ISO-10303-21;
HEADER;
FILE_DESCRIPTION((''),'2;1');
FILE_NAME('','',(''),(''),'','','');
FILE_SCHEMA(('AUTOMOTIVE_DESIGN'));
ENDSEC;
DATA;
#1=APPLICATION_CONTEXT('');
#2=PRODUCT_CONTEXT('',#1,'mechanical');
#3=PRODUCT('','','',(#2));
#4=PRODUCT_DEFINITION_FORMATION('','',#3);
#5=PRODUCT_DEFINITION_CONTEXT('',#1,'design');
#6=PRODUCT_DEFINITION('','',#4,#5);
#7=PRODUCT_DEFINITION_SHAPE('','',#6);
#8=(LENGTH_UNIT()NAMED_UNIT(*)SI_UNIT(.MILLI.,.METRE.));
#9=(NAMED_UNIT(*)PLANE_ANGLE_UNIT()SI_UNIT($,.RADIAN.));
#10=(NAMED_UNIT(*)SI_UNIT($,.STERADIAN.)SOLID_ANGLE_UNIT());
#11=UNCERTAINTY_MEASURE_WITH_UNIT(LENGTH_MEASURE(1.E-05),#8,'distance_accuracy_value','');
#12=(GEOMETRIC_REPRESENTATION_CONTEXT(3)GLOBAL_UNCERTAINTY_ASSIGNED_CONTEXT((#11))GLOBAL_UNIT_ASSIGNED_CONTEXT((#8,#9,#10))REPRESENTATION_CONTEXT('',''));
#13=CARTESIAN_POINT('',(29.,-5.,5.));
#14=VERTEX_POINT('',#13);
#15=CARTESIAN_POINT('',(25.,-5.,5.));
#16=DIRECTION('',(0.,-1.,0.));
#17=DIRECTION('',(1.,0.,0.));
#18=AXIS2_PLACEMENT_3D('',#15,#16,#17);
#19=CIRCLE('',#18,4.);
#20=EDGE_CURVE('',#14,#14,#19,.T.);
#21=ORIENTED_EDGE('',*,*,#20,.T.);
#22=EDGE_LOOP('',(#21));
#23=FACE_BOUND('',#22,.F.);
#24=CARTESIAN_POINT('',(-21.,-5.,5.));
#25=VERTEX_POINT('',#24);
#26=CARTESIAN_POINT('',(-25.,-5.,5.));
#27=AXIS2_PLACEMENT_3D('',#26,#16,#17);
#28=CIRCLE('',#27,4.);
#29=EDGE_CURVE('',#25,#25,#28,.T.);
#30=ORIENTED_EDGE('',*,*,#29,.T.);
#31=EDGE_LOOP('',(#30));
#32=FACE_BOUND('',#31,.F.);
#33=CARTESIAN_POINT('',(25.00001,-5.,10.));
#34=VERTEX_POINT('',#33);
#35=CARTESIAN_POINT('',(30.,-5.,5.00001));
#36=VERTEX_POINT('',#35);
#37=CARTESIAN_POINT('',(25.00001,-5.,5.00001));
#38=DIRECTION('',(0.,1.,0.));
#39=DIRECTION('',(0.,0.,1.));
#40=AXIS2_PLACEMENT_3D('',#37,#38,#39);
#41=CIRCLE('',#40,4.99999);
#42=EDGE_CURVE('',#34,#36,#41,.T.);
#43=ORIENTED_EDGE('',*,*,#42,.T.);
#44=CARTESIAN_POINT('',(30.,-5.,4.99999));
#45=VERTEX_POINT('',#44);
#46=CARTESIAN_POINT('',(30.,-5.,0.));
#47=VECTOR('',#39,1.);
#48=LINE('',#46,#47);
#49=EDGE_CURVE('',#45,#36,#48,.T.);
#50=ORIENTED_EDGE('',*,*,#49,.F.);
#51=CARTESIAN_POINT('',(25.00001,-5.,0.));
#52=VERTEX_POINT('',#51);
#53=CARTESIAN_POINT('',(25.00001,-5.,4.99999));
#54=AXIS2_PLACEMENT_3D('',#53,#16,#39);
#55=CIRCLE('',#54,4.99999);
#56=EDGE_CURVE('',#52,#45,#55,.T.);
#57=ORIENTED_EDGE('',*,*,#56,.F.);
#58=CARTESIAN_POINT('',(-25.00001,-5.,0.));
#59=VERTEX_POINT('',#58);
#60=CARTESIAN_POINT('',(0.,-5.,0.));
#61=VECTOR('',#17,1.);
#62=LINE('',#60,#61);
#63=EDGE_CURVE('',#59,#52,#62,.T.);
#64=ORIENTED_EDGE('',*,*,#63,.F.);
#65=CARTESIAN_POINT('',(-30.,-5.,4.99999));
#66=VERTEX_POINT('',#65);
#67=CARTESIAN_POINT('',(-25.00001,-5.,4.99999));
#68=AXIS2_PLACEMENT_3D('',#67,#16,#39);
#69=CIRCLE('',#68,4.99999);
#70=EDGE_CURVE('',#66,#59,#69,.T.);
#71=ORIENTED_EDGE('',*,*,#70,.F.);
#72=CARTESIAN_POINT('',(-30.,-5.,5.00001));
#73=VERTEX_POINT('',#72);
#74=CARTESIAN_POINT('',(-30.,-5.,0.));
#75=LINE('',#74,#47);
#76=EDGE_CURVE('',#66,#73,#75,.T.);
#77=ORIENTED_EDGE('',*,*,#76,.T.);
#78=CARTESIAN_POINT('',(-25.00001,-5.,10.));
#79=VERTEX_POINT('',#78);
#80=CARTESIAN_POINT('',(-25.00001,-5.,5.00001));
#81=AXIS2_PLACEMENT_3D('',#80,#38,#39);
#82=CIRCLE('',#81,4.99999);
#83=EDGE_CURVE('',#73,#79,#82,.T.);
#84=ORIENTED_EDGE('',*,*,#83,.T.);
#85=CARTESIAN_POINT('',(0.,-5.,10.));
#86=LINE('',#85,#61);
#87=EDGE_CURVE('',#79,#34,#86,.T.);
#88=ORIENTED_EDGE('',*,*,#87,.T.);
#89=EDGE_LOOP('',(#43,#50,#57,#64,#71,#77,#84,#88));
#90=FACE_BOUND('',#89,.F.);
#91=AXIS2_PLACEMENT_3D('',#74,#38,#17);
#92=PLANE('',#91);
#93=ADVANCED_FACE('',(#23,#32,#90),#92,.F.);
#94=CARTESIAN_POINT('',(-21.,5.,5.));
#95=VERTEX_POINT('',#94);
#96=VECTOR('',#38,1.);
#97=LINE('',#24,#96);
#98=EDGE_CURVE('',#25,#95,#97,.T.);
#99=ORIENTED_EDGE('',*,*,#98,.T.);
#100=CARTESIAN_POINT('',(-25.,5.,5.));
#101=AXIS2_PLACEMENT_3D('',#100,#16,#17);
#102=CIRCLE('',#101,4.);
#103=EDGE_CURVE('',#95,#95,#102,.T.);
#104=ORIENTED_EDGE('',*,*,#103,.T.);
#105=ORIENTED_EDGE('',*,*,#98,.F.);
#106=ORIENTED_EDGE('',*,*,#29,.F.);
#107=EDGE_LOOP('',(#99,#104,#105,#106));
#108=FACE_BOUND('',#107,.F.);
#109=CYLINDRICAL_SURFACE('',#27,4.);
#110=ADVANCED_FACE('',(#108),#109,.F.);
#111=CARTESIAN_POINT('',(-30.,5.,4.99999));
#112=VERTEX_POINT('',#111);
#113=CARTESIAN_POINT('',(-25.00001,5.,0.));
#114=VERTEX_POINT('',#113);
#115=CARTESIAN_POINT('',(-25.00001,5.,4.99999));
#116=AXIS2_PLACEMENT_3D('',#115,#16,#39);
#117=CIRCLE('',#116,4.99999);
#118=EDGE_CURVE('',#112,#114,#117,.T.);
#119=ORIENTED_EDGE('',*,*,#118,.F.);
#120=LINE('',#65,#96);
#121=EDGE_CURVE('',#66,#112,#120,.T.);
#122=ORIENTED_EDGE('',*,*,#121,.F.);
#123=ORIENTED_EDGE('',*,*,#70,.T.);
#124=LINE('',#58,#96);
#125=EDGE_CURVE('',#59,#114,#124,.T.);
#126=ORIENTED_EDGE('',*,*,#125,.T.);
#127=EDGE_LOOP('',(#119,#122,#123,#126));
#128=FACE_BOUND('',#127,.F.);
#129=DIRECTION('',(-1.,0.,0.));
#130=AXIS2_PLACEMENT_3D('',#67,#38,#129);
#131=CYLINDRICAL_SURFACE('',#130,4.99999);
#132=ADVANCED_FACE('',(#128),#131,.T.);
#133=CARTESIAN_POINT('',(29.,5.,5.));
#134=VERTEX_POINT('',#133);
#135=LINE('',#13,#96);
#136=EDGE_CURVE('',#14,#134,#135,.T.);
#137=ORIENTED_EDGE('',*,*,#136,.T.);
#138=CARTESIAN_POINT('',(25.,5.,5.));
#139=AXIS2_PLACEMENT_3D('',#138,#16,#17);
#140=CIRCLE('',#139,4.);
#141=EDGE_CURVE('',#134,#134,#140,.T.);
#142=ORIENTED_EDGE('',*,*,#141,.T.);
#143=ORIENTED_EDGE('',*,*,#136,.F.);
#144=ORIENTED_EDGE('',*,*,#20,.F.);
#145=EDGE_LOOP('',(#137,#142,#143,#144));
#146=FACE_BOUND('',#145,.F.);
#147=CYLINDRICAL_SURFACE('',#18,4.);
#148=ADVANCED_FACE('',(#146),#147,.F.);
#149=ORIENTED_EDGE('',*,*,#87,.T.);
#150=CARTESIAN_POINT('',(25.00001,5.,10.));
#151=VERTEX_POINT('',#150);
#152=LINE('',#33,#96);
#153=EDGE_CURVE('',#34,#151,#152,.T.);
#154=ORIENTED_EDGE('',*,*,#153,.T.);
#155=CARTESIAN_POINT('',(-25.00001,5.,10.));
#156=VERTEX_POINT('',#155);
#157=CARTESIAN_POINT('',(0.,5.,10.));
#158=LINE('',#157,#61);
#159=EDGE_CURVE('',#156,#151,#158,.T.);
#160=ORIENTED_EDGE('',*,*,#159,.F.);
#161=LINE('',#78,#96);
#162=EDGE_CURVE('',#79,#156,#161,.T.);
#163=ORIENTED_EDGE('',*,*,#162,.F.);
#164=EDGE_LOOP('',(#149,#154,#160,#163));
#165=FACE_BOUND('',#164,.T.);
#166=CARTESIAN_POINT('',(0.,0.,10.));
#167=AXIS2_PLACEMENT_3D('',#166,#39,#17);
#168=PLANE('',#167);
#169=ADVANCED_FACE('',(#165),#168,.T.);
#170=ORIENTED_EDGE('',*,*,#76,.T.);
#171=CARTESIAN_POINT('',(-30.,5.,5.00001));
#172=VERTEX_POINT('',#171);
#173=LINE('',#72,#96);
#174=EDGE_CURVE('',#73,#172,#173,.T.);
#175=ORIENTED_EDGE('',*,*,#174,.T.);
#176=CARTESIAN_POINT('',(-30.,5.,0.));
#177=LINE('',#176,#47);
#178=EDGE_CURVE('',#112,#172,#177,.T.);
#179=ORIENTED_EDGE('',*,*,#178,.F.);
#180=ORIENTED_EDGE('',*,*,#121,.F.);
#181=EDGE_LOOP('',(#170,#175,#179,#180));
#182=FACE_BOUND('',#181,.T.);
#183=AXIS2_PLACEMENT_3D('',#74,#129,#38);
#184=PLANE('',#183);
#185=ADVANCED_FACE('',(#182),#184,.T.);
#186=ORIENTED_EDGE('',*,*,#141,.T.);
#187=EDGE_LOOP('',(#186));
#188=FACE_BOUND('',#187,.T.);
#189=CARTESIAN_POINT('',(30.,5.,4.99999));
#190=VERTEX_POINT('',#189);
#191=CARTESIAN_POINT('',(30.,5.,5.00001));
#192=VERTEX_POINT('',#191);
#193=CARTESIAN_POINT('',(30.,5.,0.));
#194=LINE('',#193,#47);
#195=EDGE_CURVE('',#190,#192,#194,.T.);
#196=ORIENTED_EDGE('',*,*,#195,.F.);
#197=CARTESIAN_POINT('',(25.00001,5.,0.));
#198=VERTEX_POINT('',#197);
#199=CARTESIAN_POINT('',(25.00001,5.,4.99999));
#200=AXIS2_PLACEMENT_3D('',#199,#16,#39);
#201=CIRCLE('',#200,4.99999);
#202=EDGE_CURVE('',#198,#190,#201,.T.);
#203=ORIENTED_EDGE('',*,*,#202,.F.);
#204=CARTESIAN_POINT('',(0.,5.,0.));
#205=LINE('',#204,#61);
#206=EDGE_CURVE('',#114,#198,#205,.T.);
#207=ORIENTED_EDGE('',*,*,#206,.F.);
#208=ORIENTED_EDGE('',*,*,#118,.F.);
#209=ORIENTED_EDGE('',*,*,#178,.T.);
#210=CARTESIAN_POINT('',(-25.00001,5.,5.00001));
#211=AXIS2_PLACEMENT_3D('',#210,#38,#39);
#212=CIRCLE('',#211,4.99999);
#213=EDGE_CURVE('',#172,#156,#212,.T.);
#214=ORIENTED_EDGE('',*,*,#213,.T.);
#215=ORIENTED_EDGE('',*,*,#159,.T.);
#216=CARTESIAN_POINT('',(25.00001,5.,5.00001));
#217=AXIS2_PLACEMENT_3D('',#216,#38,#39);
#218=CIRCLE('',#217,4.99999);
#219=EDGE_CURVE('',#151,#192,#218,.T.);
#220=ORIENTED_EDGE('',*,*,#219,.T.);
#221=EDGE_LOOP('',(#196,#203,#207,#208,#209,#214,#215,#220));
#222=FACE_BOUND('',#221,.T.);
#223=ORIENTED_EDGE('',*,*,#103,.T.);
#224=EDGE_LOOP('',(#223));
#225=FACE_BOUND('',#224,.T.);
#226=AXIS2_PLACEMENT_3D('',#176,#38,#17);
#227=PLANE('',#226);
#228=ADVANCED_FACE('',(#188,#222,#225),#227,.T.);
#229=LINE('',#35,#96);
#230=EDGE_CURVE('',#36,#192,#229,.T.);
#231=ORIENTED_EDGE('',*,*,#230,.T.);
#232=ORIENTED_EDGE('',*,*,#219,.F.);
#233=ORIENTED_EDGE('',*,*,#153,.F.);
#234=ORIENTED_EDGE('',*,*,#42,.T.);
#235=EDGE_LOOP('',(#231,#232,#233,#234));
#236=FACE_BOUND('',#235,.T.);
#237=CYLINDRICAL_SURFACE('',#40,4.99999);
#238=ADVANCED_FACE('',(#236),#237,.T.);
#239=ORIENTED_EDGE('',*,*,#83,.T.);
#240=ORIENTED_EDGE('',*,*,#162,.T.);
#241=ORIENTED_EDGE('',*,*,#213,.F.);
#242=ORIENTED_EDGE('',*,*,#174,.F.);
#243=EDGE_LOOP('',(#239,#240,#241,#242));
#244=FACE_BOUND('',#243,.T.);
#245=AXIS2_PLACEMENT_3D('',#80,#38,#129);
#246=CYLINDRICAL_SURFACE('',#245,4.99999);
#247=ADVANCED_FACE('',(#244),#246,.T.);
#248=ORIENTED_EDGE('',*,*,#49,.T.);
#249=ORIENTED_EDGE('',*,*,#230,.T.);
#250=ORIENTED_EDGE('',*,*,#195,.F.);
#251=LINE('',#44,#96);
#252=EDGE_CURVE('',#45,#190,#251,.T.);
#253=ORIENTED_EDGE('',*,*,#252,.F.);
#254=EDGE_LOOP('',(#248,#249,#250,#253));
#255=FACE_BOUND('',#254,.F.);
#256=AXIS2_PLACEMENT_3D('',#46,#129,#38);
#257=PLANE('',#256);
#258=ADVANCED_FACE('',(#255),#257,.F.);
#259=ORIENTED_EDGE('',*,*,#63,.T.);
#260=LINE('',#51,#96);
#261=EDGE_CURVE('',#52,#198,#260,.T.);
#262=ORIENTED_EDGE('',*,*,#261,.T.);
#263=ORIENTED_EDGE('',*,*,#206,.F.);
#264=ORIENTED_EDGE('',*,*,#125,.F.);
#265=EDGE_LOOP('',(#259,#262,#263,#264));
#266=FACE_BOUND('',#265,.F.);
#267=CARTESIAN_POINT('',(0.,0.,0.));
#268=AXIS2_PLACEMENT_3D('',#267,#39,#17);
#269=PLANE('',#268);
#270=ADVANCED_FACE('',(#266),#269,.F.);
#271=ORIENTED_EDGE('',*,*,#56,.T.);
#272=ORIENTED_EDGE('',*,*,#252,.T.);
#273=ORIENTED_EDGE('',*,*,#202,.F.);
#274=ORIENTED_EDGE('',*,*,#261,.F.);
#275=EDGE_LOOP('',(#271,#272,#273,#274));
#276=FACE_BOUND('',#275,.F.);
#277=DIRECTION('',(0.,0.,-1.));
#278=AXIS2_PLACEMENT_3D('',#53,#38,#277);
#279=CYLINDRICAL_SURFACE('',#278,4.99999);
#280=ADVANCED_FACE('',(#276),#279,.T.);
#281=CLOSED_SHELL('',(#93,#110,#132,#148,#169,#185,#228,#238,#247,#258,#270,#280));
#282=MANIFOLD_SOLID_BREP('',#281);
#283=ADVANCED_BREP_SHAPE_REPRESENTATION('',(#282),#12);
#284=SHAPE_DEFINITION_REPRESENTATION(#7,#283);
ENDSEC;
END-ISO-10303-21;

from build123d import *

# Parameters (mm, degrees)
F0_W     = 60
F0_H     = 10
F1_DEPTH = 10
F2_R     = 4
F3_DEPTH = 10.001
F4_R     = 4.99999
F5_R     = 4
F6_DEPTH = 10.001


# Not quite as in the source:
# - a fillet or chamfer is up to 0.001 mm smaller than in the source, because OpenCascade refuses the exact size


with BuildPart() as f1:
    # F0 (on Top) → F1 (new body)
    with BuildSketch(Plane.XY):
        Rectangle(F0_W, F0_H)
    extrude(amount=F1_DEPTH)

    # F2 (on face) → F3 (cut, through all)
    with BuildSketch(Plane.XZ.offset(5)):
        with Locations((-25, 5)):
            Circle(F2_R)
        with Locations((25, 5)):
            Circle(F2_R)
    extrude(amount=-F3_DEPTH, mode=Mode.SUBTRACT)

    # F4 (radius 5 in the source; OpenCascade refuses exactly that, so slightly less here)
    f4_edges = [f1.edges().sort_by_distance(p)[0] for p in [
        (-30, 0, 10),
        (-30, 0, 0),
        (30, 0, 10),
        (30, 0, 0),
    ]]
    fillet(f4_edges, radius=F4_R)

    # F5 (on face) → F6 (cut, through all)
    with BuildSketch(Plane.XZ.offset(5)):
        with Locations((45, 5)):
            Circle(F5_R)
    extrude(amount=-F6_DEPTH, mode=Mode.SUBTRACT)


solid = f1.part
